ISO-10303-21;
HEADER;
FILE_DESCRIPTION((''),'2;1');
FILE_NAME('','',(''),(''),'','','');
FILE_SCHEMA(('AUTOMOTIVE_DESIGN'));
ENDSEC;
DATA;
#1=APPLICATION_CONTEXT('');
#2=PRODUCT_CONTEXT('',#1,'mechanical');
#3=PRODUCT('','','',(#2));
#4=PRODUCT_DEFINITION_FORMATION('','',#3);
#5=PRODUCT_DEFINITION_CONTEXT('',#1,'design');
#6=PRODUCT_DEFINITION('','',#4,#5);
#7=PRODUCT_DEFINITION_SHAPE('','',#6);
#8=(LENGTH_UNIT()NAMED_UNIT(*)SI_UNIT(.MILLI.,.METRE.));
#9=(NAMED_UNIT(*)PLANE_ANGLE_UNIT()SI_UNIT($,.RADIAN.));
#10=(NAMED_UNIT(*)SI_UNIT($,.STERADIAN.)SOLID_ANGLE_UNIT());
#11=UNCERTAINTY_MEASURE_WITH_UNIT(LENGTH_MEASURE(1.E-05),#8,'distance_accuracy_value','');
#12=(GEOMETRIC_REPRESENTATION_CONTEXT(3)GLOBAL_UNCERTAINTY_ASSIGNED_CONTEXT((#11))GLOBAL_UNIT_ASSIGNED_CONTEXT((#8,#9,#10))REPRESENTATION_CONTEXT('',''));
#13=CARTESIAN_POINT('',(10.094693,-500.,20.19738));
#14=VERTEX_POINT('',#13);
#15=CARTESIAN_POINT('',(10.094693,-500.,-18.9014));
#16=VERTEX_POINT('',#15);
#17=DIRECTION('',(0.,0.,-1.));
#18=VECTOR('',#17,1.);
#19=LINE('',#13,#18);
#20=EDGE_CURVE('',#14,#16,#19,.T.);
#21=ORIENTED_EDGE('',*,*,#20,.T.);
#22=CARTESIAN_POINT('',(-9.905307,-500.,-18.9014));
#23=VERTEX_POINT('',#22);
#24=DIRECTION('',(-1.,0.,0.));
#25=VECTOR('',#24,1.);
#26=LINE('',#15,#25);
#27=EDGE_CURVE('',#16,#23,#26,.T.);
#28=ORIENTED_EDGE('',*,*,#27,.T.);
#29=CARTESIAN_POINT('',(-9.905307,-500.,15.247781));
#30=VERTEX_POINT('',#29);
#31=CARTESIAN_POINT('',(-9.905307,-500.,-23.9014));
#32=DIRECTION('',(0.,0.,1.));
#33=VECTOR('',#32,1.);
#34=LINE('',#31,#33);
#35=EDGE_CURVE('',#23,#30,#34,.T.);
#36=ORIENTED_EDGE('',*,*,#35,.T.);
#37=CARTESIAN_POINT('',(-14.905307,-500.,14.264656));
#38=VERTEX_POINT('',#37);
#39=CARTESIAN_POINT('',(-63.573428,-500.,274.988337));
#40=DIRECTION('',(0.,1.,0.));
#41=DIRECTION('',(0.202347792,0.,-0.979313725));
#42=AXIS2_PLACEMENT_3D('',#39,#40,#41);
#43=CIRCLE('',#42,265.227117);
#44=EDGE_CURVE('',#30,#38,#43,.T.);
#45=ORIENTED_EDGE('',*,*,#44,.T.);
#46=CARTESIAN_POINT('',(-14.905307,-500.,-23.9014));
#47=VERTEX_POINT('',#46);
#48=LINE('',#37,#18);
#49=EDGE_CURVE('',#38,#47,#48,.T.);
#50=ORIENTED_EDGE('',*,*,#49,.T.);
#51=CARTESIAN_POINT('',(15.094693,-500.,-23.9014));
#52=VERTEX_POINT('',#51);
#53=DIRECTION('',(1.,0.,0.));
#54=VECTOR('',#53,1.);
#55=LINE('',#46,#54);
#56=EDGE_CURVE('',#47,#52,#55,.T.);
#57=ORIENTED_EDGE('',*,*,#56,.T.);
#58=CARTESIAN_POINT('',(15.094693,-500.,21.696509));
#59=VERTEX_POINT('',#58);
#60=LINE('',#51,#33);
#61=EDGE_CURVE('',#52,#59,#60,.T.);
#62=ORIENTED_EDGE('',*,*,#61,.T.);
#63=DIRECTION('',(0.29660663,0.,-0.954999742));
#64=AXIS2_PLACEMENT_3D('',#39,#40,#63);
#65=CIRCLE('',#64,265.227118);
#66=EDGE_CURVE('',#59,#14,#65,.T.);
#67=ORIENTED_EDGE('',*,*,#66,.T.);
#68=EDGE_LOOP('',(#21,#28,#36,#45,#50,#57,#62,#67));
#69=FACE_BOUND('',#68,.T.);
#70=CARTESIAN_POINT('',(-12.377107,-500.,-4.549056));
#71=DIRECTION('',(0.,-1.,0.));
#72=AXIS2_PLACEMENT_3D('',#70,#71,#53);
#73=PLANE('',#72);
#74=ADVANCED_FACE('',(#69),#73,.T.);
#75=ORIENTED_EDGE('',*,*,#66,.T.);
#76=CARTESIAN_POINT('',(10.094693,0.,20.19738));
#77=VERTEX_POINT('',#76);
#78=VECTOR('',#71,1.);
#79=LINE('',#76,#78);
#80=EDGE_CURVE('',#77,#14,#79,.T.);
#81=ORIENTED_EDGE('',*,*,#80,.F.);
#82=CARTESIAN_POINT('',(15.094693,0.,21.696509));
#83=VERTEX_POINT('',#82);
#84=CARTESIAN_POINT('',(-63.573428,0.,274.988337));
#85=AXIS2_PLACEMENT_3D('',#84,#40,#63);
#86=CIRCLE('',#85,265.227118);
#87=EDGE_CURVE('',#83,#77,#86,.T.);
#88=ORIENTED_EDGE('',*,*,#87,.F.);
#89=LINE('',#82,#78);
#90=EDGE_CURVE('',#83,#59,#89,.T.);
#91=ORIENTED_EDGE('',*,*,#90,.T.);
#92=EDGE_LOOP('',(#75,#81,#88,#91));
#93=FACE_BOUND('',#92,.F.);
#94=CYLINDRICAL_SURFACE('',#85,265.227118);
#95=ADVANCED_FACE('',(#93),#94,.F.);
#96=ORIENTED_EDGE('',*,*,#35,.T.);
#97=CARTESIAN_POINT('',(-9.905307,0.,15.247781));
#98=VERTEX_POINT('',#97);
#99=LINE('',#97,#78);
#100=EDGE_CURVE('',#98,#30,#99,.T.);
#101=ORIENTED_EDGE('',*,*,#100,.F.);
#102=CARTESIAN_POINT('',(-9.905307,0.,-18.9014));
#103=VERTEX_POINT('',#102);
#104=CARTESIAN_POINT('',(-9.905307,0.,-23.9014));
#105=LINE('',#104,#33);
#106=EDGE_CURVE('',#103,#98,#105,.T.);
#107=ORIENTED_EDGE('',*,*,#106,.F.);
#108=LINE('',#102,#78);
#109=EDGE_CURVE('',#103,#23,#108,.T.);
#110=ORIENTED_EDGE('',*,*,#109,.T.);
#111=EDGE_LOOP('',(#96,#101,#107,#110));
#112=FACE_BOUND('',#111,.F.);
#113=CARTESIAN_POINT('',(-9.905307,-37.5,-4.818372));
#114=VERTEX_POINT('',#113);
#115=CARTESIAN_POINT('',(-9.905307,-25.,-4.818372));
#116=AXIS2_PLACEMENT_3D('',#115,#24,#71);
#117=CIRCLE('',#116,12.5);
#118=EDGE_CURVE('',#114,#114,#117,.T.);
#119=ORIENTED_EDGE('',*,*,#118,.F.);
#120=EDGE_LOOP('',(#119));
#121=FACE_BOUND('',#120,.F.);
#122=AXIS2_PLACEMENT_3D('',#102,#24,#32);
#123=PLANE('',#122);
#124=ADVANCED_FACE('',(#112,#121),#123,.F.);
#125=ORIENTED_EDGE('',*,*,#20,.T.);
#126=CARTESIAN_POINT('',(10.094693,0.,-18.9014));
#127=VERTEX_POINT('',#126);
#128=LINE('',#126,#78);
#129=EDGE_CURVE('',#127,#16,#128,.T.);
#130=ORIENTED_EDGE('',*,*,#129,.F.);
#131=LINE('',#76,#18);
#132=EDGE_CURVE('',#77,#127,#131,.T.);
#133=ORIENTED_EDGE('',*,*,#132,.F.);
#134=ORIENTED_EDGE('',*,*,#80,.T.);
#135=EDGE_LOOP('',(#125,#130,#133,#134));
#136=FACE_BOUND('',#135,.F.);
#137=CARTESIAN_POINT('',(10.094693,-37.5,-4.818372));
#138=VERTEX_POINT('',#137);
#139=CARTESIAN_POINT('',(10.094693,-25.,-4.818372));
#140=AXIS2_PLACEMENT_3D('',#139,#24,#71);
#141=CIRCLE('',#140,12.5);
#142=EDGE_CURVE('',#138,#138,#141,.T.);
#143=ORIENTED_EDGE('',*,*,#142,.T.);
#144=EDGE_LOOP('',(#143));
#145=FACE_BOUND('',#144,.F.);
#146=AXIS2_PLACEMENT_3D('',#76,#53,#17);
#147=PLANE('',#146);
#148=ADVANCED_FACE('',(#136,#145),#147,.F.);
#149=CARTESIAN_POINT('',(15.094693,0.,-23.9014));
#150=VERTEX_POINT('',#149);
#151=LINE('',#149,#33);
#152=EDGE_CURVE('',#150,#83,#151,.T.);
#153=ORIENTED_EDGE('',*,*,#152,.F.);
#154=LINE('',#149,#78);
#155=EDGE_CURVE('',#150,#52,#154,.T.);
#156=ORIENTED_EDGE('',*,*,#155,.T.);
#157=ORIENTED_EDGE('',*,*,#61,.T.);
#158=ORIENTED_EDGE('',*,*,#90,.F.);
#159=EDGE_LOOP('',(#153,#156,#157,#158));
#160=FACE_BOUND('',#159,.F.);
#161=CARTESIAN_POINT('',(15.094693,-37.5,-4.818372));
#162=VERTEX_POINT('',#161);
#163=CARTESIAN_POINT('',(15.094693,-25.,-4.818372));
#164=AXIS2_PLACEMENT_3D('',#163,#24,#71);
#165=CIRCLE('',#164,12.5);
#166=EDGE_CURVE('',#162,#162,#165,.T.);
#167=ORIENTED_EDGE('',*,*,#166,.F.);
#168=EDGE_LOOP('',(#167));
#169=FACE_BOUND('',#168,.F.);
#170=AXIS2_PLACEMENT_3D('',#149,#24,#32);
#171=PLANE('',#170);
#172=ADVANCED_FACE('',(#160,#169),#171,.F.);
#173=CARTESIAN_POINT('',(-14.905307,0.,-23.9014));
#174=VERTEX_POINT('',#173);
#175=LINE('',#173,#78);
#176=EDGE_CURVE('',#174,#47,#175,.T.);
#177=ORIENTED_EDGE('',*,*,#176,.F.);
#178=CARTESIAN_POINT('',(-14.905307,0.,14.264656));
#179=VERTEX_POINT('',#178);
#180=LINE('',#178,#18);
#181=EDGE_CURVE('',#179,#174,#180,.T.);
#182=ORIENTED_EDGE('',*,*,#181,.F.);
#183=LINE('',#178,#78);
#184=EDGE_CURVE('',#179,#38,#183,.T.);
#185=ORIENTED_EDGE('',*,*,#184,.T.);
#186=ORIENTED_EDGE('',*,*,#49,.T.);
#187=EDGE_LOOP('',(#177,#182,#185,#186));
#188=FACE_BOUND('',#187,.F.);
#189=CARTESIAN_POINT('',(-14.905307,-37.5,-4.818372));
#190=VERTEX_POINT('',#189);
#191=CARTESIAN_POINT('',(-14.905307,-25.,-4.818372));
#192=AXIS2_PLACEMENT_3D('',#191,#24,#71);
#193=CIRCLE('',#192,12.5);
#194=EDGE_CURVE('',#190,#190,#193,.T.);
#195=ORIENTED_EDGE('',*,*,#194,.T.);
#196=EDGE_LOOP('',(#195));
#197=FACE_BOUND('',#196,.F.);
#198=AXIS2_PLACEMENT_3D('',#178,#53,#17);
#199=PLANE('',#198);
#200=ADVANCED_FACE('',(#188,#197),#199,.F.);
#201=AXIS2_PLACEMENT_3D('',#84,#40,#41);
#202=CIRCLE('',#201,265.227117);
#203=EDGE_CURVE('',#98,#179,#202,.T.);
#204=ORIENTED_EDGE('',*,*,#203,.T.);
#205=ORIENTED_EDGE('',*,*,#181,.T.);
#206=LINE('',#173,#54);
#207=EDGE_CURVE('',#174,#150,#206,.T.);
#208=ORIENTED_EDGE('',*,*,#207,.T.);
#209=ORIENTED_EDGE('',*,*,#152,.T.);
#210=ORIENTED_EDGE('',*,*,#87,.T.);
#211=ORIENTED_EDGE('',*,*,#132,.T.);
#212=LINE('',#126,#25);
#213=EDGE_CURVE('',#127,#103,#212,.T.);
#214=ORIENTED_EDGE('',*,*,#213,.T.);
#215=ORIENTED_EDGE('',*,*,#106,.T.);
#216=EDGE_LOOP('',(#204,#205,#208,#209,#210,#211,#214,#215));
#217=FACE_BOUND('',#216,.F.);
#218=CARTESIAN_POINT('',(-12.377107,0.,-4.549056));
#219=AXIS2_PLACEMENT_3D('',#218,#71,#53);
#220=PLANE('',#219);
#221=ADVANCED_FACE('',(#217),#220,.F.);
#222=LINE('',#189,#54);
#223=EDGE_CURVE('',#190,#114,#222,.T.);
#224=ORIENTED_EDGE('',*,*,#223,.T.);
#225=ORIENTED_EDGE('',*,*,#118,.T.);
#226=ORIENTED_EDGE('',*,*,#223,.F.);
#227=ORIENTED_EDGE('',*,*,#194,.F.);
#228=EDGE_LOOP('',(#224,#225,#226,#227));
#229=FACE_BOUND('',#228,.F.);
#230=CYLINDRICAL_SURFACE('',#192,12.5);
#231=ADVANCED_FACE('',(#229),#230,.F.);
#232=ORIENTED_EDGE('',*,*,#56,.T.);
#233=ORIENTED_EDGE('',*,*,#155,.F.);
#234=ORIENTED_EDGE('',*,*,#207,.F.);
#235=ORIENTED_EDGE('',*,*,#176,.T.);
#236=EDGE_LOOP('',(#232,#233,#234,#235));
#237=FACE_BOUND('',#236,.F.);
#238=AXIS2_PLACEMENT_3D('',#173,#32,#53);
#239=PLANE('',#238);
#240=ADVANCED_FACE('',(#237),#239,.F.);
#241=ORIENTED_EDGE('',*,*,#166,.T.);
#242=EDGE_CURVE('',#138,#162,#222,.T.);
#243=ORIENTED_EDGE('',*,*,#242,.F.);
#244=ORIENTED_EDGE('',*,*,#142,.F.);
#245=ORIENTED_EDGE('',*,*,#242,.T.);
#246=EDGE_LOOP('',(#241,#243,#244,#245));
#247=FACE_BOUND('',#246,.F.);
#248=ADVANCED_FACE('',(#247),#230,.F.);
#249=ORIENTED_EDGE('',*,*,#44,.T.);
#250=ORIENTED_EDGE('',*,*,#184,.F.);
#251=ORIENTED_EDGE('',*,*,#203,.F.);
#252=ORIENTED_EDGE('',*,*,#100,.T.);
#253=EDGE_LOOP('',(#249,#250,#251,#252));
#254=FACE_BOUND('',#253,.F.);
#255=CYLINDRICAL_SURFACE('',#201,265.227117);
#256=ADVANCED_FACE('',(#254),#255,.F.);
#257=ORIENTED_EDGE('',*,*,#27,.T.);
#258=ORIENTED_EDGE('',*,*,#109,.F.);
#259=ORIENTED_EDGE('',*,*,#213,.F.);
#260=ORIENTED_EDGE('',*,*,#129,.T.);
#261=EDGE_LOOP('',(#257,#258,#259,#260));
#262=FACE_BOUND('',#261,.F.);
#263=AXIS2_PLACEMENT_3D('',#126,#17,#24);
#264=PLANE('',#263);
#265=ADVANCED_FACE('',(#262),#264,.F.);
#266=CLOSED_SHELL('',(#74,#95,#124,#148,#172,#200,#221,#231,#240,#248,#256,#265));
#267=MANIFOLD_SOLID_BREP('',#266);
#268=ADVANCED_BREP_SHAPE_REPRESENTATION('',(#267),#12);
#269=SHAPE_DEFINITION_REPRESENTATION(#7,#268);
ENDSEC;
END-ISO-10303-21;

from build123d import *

# Parameters (mm, degrees)
F1_DEPTH = 500
F2_R     = 12.5
F3_DEPTH = 800


with BuildPart() as f1:
    # F0 (on Front) → F1 (new body)
    with BuildSketch(Plane.XZ):
        with BuildLine():
            Line((-14.9053066795, 14.2646563623), (-14.9053066795, -23.9014003186))
            Line((-14.9053066795, -23.9014003186), (-9.9053066795, -23.9014003186))
            Line((-9.9053066795, -23.9014003186), (-9.9053066795, -18.9014003186))
            Line((-9.9053066795, -18.9014003186), (-9.9053066795, 15.2477810018))
            ThreePointArc((-9.9053066795, 15.2477810018), (-12.4029455615, 14.7442104491), (-14.9053066795, 14.2646563623))
        make_face()
        Polygon((-9.9053066795, -18.9014003186), (-9.9053066795, -23.9014003186), (10.0946933205, -23.9014003186), (10.0946933205, -18.9014003186), (9.9053066795, -18.9014003186), align=None)
        with BuildLine():
            Line((10.0946933205, -18.9014003186), (10.0946933205, -23.9014003186))
            Line((10.0946933205, -23.9014003186), (14.9053066795, -23.9014003186))
            Line((14.9053066795, -23.9014003186), (15.0946933205, -23.9014003186))
            Line((15.0946933205, -23.9014003186), (15.0946933205, 21.6965085553))
            ThreePointArc((15.0946933205, 21.6965085553), (12.5983814298, 20.9346436244), (10.0946933205, 20.1973803878))
            Line((10.0946933205, 20.1973803878), (10.0946933205, -18.9014003186))
        make_face()
    extrude(amount=F1_DEPTH)

    # F2 (on face) → F3 (cut)
    with BuildSketch(Plane(origin=(-14.9053066795, 0, 0), x_dir=(0, -1, 0), z_dir=(-1, 0, 0))):
        with Locations((25, -4.8183719781)):
            Circle(F2_R)
    extrude(amount=-F3_DEPTH, mode=Mode.SUBTRACT)


solid = f1.part
